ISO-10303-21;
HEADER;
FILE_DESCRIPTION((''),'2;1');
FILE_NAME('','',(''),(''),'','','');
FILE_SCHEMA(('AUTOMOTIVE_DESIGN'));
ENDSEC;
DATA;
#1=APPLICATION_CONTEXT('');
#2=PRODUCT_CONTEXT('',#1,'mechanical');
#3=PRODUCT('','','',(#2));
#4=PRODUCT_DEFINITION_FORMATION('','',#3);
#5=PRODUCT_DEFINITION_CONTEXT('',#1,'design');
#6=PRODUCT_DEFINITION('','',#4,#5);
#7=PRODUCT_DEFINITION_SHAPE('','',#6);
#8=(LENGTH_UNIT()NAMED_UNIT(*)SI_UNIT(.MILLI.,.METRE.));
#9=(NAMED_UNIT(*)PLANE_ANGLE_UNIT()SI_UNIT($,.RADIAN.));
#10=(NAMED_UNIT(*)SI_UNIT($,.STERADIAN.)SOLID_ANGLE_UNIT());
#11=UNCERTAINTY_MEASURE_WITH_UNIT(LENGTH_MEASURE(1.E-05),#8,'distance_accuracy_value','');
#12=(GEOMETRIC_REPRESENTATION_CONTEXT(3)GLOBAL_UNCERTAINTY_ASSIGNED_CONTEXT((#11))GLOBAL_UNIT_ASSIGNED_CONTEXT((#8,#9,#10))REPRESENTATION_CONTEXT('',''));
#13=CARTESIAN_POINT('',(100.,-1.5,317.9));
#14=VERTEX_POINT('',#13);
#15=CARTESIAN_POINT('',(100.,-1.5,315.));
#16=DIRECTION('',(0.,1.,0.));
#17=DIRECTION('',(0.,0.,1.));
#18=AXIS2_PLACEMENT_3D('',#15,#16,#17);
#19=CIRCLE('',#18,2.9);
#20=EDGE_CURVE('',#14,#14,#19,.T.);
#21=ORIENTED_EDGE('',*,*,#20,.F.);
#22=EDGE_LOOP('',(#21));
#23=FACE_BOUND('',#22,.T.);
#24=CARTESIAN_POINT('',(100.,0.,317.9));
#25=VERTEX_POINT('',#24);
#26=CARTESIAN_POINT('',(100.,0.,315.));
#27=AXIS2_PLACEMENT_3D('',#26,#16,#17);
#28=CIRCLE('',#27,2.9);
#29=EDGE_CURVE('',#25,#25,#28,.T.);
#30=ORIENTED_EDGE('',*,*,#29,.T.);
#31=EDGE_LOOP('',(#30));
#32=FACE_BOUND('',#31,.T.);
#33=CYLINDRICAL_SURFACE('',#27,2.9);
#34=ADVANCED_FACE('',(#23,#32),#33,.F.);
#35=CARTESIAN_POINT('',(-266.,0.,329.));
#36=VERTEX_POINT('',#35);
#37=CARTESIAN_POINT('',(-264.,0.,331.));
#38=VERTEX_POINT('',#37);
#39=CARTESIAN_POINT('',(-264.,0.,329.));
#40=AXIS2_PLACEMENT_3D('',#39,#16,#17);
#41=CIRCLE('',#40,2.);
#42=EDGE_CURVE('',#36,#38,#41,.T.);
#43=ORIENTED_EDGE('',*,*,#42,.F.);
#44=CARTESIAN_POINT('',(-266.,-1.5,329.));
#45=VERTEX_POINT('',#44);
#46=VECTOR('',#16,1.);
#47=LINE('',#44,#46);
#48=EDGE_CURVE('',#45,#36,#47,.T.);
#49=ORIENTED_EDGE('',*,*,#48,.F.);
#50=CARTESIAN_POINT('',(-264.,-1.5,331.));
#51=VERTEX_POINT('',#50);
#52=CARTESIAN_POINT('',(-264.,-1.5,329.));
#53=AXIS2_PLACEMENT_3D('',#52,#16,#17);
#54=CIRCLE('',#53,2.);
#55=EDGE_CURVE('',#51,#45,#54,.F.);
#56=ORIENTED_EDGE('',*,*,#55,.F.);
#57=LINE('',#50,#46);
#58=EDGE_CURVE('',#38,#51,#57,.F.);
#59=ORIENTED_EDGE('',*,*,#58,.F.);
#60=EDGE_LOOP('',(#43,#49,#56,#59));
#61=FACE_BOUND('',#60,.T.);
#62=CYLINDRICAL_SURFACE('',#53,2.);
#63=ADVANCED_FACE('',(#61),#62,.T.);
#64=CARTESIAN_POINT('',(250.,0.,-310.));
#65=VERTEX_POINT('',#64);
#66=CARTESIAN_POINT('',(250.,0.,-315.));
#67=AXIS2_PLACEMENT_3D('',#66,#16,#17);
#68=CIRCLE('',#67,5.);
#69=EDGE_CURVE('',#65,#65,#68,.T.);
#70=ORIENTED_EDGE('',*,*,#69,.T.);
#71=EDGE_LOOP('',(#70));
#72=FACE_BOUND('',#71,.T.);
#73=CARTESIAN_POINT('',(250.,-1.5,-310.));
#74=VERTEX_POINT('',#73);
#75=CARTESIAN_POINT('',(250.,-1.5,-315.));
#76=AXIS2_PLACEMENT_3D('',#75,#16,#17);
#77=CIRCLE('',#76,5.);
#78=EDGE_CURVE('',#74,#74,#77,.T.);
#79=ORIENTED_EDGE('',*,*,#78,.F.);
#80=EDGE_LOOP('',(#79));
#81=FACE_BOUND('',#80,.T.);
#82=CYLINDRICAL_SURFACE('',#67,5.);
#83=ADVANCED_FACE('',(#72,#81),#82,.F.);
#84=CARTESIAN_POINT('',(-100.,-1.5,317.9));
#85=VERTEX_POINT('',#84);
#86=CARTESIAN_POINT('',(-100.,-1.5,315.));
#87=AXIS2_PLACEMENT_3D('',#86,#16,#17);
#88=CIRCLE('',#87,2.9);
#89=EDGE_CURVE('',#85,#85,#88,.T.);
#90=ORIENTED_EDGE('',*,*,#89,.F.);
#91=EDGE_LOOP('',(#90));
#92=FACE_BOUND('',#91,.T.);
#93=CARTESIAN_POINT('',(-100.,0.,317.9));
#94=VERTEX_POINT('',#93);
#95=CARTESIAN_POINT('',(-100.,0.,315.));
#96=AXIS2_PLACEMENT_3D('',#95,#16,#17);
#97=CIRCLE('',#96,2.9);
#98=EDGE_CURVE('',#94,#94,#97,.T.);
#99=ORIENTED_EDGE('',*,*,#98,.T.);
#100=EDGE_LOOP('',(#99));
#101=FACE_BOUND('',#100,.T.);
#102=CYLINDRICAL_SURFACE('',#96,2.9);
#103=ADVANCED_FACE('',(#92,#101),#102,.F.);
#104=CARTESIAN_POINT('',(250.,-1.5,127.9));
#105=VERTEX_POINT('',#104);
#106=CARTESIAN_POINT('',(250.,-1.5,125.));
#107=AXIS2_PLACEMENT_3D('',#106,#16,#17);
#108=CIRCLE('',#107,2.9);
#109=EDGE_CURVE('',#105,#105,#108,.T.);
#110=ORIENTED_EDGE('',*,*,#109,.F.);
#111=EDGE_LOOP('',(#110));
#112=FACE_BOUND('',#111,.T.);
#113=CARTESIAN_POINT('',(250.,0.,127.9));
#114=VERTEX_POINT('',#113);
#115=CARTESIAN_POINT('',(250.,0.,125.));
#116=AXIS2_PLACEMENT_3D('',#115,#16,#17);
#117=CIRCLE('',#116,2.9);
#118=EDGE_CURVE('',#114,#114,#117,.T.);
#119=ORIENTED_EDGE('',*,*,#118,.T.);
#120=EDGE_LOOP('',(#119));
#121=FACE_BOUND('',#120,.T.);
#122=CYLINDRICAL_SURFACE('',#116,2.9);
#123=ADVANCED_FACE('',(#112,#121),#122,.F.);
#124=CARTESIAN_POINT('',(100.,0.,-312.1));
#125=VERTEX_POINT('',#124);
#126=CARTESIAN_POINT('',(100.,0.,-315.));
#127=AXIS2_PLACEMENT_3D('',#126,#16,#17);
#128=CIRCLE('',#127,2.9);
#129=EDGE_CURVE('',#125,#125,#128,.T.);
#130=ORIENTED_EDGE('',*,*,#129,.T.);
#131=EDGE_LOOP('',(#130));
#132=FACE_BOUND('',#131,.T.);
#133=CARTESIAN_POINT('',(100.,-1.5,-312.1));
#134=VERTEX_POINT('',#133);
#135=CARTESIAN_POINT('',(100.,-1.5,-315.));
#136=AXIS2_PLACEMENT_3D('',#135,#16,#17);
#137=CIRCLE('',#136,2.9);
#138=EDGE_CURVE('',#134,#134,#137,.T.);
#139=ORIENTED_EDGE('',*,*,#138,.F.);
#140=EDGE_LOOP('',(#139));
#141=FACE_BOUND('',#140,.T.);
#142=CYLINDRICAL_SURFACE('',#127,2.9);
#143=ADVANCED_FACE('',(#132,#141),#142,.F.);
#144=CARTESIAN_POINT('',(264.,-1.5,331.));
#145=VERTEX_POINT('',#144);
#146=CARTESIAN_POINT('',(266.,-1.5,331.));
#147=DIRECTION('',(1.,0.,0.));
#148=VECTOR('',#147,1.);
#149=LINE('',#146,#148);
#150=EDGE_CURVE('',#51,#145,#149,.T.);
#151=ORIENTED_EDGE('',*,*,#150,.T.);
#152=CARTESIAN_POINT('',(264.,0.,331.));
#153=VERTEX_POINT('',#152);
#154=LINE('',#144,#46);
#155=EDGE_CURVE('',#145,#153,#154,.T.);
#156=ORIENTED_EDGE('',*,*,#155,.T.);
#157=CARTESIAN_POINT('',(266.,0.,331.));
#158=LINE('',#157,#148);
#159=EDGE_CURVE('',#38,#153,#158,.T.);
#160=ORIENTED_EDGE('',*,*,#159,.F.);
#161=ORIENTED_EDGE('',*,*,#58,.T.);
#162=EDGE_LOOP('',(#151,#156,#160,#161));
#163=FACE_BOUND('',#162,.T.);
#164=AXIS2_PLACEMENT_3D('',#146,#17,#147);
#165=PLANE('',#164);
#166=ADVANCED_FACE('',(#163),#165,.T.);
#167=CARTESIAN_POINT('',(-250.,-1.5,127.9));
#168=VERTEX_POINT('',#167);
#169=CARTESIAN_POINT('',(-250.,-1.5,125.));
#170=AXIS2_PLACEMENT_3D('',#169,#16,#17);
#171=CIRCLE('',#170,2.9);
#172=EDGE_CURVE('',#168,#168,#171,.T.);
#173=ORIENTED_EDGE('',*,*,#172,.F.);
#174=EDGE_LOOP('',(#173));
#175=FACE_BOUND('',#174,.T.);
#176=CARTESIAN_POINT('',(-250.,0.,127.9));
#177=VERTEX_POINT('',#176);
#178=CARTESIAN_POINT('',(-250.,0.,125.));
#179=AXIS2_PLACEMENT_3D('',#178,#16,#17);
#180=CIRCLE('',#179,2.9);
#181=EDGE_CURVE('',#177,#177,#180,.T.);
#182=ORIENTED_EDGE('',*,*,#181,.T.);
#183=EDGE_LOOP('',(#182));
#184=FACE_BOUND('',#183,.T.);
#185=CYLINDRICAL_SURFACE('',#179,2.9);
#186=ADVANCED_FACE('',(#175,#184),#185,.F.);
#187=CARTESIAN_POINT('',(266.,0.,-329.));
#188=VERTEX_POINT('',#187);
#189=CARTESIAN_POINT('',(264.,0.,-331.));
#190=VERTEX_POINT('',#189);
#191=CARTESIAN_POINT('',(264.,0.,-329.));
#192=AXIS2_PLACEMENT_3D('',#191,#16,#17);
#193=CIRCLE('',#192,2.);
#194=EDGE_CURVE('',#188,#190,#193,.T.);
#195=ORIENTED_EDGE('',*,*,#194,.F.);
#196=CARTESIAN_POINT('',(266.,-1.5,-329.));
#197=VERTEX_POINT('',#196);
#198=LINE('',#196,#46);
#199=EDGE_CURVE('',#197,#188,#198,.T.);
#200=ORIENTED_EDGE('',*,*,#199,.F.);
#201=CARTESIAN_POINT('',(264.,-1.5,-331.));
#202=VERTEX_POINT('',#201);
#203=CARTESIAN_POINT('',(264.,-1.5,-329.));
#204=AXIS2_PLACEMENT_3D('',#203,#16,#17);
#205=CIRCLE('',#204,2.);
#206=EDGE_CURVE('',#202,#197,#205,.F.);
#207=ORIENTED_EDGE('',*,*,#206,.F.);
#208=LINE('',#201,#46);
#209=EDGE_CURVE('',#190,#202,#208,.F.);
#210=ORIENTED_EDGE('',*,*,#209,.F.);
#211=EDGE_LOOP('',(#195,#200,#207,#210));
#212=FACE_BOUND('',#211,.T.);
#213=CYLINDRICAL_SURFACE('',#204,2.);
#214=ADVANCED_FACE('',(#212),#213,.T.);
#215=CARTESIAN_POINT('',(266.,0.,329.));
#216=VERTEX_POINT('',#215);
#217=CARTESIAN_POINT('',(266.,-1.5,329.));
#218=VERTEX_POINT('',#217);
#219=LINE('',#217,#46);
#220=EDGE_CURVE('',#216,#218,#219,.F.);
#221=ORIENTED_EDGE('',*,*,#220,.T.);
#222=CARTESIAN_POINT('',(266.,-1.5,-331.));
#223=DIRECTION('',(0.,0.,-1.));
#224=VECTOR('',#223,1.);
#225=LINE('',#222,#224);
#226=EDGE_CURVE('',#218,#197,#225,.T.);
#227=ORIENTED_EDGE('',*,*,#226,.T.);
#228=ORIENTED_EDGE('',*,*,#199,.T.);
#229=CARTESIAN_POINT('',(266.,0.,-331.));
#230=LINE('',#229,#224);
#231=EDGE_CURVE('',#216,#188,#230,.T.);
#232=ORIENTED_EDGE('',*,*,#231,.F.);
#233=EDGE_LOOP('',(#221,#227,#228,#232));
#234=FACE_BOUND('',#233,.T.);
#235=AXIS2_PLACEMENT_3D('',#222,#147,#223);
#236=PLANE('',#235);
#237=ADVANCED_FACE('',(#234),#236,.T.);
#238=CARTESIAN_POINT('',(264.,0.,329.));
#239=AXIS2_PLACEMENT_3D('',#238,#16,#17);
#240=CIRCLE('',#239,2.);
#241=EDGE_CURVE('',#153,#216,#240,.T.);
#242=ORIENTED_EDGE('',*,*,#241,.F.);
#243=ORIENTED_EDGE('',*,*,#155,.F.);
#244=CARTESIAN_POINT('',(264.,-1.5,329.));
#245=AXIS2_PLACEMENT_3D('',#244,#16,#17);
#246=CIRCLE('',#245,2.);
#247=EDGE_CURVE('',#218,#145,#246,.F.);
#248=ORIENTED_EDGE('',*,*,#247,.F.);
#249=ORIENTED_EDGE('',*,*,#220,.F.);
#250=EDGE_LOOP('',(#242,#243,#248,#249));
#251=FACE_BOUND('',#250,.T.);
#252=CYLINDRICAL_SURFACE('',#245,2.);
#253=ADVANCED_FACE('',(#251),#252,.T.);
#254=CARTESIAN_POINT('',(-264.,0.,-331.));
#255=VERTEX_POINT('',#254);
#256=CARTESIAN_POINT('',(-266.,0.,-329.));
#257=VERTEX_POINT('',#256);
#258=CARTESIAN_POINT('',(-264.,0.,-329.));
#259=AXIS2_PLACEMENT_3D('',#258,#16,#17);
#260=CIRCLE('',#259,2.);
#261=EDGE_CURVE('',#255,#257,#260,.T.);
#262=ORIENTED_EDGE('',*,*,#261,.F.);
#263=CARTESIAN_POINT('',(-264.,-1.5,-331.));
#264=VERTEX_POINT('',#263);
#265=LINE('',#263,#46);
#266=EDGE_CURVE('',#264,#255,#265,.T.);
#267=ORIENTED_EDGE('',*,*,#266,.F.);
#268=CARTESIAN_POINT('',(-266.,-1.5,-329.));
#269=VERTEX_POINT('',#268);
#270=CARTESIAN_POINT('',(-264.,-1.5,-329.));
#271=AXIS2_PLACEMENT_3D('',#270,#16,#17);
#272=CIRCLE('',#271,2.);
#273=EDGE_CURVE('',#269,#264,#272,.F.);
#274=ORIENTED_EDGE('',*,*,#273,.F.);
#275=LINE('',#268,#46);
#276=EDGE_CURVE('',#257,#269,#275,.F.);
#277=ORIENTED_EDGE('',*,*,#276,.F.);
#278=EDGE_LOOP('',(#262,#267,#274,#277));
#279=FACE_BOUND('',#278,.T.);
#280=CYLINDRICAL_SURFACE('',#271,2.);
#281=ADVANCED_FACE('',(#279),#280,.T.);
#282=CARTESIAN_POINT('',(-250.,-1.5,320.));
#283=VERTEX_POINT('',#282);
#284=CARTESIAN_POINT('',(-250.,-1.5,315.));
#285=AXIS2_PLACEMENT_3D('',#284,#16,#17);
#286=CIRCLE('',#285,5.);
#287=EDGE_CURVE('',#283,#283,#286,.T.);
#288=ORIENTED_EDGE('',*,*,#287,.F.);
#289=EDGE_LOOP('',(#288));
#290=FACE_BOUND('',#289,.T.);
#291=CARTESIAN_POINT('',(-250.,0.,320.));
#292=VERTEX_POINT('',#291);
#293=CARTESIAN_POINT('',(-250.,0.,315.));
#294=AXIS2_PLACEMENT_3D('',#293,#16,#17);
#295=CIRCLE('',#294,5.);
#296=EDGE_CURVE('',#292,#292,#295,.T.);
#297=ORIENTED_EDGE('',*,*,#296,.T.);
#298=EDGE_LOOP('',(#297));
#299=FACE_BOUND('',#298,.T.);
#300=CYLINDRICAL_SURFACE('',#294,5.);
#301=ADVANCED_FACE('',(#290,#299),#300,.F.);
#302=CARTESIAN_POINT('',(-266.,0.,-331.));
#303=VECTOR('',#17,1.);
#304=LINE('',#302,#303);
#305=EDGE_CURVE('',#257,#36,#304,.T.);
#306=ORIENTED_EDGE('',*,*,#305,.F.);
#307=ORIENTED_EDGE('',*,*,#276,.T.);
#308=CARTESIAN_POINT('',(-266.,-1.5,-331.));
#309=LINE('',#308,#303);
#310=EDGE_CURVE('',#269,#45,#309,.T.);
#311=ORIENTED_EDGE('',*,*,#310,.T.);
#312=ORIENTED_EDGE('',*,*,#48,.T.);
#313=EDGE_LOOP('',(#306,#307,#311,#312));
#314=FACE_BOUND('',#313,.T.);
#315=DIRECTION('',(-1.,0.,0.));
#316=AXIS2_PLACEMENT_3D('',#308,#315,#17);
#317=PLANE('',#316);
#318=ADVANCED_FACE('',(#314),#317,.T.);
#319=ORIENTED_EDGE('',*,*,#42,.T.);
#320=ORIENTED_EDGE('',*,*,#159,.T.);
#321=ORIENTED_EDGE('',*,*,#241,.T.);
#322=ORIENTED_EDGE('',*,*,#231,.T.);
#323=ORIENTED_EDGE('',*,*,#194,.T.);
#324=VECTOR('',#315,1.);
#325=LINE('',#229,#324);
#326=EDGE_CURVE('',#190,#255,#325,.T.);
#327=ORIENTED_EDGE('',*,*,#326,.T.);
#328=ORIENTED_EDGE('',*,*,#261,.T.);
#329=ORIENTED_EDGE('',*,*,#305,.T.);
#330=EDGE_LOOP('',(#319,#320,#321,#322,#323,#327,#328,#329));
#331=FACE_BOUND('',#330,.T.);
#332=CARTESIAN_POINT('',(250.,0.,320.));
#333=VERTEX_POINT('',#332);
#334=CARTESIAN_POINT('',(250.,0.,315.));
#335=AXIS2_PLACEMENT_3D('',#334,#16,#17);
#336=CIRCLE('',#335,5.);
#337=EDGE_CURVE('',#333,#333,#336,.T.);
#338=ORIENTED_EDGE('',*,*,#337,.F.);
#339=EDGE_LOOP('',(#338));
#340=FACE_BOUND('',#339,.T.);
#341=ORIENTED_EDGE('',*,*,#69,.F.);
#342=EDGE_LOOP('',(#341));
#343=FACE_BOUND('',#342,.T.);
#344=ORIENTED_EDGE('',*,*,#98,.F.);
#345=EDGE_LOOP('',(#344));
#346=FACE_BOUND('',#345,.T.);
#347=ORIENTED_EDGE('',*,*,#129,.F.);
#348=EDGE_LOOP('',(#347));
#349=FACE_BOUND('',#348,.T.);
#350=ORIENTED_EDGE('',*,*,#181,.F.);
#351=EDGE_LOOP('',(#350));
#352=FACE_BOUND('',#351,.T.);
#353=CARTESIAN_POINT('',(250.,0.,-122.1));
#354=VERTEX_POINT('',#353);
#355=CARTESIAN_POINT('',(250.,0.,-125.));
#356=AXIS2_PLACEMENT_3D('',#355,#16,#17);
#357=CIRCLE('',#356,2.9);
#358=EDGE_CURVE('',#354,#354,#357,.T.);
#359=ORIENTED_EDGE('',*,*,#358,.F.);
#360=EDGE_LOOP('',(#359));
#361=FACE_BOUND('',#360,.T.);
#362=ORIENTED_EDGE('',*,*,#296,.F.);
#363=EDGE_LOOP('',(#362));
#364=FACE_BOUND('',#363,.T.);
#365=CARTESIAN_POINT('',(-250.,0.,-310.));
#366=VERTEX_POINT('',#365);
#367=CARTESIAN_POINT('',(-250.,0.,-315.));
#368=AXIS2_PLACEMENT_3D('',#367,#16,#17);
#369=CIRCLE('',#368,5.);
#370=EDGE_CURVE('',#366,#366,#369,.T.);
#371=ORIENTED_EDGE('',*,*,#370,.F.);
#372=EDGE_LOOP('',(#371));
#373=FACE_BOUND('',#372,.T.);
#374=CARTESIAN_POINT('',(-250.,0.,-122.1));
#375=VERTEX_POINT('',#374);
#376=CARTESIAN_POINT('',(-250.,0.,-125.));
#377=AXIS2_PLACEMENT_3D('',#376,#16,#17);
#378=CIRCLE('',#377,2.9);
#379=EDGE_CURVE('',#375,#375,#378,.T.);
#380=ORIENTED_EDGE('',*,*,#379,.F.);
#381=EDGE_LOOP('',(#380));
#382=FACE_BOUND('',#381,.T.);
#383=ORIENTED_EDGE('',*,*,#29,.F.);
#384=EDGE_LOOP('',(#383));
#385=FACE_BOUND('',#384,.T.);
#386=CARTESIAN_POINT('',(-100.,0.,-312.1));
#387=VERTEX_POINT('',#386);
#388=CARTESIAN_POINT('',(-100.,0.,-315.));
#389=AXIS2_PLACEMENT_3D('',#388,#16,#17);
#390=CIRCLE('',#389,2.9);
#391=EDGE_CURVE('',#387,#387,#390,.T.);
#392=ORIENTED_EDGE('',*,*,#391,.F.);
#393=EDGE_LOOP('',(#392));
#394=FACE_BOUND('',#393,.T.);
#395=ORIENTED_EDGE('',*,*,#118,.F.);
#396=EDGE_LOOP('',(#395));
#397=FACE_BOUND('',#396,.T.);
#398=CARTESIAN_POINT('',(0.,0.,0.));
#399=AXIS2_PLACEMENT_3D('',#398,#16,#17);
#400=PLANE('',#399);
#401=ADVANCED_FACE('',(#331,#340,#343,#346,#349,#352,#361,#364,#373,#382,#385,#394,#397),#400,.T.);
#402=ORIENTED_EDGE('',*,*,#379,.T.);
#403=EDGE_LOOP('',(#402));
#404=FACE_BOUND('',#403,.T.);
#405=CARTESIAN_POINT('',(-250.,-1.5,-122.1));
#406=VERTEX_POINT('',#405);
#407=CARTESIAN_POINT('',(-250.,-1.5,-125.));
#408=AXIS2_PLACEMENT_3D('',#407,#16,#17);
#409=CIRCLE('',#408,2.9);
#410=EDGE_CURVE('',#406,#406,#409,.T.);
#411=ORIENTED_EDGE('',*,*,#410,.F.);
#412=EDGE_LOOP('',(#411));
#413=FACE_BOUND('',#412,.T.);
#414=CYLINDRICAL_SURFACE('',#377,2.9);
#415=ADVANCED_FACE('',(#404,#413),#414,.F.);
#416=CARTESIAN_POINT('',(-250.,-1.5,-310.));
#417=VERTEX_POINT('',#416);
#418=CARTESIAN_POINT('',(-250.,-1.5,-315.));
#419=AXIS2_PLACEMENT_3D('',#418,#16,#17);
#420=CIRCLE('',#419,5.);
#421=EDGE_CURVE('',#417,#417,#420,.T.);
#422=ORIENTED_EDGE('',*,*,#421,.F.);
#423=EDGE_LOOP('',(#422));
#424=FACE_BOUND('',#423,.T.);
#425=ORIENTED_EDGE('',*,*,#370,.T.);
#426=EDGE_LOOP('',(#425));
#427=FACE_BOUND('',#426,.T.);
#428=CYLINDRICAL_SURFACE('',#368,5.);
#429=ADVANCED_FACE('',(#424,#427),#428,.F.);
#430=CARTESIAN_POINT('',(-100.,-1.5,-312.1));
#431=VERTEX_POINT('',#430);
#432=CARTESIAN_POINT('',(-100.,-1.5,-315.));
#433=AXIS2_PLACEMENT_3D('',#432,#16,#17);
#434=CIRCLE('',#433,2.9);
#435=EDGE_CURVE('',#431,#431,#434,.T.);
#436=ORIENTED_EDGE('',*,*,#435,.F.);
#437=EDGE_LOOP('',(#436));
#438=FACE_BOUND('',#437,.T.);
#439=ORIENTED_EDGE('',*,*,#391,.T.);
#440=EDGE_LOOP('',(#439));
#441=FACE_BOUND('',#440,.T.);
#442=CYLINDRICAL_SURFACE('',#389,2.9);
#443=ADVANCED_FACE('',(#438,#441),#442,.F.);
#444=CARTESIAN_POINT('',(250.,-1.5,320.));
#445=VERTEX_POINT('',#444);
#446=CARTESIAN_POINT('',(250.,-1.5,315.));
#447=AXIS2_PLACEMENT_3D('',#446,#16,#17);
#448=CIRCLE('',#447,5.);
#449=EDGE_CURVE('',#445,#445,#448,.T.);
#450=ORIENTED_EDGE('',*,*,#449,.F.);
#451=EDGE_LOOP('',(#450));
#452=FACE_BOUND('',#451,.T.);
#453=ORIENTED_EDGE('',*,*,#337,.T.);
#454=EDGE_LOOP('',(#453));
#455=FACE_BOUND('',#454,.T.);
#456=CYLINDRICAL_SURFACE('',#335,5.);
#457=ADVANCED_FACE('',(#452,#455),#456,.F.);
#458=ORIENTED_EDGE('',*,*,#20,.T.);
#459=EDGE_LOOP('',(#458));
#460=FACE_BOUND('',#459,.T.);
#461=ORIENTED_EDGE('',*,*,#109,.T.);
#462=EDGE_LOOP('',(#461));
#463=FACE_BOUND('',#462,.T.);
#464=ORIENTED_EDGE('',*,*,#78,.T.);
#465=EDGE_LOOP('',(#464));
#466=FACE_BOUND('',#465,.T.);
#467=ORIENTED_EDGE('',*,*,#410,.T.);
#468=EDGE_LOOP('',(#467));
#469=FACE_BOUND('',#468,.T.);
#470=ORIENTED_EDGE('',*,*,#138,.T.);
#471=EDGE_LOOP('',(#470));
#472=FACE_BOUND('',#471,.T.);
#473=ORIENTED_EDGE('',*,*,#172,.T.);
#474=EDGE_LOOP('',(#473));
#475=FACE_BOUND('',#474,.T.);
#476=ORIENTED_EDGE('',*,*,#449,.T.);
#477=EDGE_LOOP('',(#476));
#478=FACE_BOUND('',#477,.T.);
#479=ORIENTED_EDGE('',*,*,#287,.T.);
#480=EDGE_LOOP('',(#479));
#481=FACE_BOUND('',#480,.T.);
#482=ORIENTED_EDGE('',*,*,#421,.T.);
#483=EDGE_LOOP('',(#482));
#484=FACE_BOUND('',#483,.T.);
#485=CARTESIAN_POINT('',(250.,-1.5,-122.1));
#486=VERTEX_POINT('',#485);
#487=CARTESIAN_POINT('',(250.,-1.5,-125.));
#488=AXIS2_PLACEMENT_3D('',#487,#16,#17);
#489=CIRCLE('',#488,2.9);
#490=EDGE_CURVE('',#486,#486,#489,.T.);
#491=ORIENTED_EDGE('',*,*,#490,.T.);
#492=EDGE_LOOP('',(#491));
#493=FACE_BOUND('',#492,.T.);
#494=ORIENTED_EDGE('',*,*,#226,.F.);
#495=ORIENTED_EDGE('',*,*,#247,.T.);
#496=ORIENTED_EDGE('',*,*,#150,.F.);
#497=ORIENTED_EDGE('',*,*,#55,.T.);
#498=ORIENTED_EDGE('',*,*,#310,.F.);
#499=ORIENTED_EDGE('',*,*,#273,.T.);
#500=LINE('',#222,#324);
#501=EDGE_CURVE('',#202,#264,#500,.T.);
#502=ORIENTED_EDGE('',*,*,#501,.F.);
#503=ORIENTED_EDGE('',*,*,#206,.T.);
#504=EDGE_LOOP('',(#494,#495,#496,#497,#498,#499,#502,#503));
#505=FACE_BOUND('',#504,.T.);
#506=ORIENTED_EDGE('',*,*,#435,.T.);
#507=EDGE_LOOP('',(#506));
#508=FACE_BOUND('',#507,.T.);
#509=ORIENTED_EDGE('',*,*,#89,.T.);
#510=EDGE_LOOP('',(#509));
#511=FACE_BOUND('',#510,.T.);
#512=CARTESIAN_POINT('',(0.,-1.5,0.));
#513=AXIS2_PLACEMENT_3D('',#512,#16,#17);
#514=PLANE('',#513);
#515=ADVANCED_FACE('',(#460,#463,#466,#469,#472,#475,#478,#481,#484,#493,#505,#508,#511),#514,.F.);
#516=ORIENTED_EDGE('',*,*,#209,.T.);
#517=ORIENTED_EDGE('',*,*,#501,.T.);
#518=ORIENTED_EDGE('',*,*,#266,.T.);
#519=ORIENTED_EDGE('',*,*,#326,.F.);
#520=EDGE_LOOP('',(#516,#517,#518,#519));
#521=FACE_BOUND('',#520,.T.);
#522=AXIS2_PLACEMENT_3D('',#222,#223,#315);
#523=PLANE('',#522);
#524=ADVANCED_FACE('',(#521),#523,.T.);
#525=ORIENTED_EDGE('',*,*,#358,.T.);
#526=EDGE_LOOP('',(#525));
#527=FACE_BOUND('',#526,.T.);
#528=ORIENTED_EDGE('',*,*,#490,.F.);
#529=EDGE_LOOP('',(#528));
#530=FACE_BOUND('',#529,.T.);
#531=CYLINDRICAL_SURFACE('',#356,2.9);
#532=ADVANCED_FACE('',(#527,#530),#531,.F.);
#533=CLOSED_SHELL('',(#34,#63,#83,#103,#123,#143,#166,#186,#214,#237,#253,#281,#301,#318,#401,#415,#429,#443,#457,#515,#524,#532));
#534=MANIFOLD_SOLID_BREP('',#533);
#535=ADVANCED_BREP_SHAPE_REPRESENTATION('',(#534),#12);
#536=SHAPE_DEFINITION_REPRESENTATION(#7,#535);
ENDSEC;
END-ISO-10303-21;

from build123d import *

# Parameters (mm, degrees)
SKETCH1_W            = 662
SKETCH1_H            = 532
BASE_FLANGE1_DEPTH   = 1.5
FILLET1_R            = 2
M8_CLEARANCE_HOLE1_D = 10
M5_CLEARANCE_HOLE1_D = 5.8


# Sheet-metal steps are written as plain solids
with BuildPart() as part:
    # Sketch1 → Base-Flange1 (new body)
    with BuildSketch(Plane(origin=(0, 0, 0), x_dir=(0, 0, -1), z_dir=(0, 1, 0))):
        Rectangle(SKETCH1_W, SKETCH1_H)
    extrude(amount=-BASE_FLANGE1_DEPTH)

    # Fillet1
    fillet1_edges = [part.edges().sort_by_distance(p)[0] for p in [
        (-266, -0.75, 331),
        (-266, -0.75, -331),
        (266, -0.75, -331),
        (266, -0.75, 331),
    ]]
    fillet(fillet1_edges, radius=FILLET1_R)

    # M8 Clearance Hole1 (through all)
    with Locations(Plane(origin=(0, 0, 0), x_dir=(1, 0, 0), z_dir=(0, 1, 0))):
        with Locations((-250, -315), (250, -315), (250, 315), (-250, 315)):
            Hole(M8_CLEARANCE_HOLE1_D / 2)

    # M5 Clearance Hole1 (through all)
    with Locations(Plane(origin=(0, 0, 0), x_dir=(1, 0, 0), z_dir=(0, 1, 0))):
        with Locations((100, 315), (-100, 315), (-250, 125), (-250, -125), (-100, -315), (100, -315), (250, -125), (250, 125)):
            Hole(M5_CLEARANCE_HOLE1_D / 2)


solid = part.part
